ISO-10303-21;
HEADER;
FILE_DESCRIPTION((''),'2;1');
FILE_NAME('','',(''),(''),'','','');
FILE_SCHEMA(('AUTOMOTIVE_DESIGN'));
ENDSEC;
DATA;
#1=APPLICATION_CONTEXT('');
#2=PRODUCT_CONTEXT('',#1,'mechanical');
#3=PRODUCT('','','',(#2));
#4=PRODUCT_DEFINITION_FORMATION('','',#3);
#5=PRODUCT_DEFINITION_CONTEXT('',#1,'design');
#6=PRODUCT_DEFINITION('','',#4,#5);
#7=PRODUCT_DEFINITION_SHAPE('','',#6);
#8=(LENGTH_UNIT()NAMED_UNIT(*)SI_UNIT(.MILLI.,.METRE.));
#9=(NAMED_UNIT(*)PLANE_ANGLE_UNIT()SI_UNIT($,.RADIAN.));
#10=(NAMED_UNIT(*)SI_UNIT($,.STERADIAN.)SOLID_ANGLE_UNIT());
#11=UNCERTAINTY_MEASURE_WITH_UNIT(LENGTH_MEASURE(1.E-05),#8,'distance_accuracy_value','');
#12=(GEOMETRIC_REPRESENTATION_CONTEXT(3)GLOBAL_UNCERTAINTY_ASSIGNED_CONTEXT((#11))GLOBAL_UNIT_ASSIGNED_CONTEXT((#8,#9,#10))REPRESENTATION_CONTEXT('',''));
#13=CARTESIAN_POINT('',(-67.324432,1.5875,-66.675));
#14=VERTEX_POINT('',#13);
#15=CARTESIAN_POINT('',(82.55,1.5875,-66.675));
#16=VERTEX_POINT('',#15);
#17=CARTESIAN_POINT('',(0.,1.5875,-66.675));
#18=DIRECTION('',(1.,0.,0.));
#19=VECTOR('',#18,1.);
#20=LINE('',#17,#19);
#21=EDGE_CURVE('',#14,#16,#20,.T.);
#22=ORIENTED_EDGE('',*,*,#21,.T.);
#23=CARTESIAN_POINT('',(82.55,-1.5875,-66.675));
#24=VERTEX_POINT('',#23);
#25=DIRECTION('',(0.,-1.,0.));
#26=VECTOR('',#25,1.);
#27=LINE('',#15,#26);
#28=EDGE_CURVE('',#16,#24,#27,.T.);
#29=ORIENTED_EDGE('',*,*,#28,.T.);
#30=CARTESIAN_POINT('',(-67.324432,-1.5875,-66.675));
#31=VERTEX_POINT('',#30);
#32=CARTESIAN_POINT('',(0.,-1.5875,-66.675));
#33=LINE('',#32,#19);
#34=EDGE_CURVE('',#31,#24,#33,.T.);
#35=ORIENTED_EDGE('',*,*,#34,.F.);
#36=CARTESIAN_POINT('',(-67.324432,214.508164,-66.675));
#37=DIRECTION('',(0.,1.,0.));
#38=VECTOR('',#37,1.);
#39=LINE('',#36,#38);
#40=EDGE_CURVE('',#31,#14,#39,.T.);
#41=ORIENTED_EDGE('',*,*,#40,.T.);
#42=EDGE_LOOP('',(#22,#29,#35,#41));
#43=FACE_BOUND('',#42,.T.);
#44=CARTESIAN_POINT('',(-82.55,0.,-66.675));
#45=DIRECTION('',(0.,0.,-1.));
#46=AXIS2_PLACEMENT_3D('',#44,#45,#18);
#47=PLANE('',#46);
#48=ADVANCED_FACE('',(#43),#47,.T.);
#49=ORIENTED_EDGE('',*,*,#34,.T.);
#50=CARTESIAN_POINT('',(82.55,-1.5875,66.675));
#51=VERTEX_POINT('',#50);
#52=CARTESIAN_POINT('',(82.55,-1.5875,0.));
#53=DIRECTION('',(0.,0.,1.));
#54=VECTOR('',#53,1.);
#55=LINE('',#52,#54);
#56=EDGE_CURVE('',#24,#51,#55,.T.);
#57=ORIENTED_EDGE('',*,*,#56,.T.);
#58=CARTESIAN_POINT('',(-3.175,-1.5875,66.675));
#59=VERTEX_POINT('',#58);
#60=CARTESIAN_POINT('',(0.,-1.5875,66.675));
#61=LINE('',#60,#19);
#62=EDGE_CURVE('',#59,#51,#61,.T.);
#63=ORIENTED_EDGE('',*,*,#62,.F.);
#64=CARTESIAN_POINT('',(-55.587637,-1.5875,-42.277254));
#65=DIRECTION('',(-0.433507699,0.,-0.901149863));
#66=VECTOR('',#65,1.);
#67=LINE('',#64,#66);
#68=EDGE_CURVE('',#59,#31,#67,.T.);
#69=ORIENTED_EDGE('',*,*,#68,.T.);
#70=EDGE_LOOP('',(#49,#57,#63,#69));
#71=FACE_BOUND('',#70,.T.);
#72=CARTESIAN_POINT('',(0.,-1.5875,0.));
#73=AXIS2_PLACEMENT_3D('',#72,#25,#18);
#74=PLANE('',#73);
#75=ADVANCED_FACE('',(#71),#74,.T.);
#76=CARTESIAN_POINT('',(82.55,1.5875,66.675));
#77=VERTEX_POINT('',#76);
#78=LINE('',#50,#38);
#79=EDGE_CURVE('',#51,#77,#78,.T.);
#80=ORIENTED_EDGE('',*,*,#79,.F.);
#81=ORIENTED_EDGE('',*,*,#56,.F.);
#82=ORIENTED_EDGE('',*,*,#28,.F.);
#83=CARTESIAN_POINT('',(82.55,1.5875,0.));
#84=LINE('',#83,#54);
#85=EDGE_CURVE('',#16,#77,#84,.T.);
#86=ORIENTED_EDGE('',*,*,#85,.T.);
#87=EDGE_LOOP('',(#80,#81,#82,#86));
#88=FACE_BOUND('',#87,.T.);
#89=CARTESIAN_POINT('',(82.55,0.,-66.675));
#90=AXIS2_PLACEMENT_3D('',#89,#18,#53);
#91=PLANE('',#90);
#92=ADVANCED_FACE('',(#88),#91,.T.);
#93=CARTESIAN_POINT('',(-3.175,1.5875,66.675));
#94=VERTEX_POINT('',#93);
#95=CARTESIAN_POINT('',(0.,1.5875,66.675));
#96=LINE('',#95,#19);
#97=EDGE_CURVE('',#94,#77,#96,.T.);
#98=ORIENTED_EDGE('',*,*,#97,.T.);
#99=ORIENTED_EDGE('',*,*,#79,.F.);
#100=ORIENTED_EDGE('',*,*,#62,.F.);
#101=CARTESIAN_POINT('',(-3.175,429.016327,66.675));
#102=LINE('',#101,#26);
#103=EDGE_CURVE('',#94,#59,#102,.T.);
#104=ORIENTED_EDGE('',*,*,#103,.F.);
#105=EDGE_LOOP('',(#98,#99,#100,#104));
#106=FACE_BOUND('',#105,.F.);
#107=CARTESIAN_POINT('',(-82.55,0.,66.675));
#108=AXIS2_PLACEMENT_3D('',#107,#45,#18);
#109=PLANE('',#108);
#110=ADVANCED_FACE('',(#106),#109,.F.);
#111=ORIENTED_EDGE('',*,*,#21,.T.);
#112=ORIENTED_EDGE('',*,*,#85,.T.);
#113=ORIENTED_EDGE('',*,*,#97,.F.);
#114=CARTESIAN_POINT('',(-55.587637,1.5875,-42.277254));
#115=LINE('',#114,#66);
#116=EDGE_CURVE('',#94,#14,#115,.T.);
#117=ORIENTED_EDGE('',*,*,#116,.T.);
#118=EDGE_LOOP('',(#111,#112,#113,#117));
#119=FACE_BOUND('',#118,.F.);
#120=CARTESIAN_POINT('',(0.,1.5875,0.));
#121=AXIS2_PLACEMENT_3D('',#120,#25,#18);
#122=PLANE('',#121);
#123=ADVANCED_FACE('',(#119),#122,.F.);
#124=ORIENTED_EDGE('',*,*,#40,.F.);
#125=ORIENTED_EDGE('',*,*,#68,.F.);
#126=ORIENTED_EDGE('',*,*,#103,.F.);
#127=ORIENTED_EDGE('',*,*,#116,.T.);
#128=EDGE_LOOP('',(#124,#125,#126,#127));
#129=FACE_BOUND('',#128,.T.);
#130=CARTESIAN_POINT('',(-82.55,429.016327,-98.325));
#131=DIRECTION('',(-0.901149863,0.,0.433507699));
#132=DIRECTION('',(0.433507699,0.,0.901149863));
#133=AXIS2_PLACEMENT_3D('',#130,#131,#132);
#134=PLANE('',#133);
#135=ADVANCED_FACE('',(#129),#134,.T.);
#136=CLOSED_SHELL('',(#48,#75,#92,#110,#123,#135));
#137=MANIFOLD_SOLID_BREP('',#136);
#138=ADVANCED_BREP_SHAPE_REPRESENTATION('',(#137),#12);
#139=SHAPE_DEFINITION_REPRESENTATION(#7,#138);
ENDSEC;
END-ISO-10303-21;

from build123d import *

# Parameters (mm, degrees)
F0_W        = 165.1
F0_H        = 133.35
F1_DEPTH    = 1.5875
F2_T1_DEPTH = 858.0326548283


# Not quite as in the source:
# - a fillet or chamfer that OpenCascade refuses, or shapes differently, is made with other operations: its cross-section is extruded or revolved along the edge and cut away or added


with BuildPart() as f1:
    # F0 (on Front) → F1 (new body, symmetric)
    with BuildSketch(Plane.XZ):
        Rectangle(F0_W, F0_H)
    extrude(amount=F1_DEPTH, both=True)

    # F2: chamfer of 165 x 79.375 on 1 edges, made by hand

    # F2_s2 → F2_t1 (cut)
    with BuildSketch(Plane.XZ.offset(-429.0163274141)):
        Polygon((-82.55, -98.325), (-3.175, 66.675), (-82.55, 66.675), align=None)
    extrude(amount=F2_T1_DEPTH, mode=Mode.SUBTRACT)


solid = f1.part
